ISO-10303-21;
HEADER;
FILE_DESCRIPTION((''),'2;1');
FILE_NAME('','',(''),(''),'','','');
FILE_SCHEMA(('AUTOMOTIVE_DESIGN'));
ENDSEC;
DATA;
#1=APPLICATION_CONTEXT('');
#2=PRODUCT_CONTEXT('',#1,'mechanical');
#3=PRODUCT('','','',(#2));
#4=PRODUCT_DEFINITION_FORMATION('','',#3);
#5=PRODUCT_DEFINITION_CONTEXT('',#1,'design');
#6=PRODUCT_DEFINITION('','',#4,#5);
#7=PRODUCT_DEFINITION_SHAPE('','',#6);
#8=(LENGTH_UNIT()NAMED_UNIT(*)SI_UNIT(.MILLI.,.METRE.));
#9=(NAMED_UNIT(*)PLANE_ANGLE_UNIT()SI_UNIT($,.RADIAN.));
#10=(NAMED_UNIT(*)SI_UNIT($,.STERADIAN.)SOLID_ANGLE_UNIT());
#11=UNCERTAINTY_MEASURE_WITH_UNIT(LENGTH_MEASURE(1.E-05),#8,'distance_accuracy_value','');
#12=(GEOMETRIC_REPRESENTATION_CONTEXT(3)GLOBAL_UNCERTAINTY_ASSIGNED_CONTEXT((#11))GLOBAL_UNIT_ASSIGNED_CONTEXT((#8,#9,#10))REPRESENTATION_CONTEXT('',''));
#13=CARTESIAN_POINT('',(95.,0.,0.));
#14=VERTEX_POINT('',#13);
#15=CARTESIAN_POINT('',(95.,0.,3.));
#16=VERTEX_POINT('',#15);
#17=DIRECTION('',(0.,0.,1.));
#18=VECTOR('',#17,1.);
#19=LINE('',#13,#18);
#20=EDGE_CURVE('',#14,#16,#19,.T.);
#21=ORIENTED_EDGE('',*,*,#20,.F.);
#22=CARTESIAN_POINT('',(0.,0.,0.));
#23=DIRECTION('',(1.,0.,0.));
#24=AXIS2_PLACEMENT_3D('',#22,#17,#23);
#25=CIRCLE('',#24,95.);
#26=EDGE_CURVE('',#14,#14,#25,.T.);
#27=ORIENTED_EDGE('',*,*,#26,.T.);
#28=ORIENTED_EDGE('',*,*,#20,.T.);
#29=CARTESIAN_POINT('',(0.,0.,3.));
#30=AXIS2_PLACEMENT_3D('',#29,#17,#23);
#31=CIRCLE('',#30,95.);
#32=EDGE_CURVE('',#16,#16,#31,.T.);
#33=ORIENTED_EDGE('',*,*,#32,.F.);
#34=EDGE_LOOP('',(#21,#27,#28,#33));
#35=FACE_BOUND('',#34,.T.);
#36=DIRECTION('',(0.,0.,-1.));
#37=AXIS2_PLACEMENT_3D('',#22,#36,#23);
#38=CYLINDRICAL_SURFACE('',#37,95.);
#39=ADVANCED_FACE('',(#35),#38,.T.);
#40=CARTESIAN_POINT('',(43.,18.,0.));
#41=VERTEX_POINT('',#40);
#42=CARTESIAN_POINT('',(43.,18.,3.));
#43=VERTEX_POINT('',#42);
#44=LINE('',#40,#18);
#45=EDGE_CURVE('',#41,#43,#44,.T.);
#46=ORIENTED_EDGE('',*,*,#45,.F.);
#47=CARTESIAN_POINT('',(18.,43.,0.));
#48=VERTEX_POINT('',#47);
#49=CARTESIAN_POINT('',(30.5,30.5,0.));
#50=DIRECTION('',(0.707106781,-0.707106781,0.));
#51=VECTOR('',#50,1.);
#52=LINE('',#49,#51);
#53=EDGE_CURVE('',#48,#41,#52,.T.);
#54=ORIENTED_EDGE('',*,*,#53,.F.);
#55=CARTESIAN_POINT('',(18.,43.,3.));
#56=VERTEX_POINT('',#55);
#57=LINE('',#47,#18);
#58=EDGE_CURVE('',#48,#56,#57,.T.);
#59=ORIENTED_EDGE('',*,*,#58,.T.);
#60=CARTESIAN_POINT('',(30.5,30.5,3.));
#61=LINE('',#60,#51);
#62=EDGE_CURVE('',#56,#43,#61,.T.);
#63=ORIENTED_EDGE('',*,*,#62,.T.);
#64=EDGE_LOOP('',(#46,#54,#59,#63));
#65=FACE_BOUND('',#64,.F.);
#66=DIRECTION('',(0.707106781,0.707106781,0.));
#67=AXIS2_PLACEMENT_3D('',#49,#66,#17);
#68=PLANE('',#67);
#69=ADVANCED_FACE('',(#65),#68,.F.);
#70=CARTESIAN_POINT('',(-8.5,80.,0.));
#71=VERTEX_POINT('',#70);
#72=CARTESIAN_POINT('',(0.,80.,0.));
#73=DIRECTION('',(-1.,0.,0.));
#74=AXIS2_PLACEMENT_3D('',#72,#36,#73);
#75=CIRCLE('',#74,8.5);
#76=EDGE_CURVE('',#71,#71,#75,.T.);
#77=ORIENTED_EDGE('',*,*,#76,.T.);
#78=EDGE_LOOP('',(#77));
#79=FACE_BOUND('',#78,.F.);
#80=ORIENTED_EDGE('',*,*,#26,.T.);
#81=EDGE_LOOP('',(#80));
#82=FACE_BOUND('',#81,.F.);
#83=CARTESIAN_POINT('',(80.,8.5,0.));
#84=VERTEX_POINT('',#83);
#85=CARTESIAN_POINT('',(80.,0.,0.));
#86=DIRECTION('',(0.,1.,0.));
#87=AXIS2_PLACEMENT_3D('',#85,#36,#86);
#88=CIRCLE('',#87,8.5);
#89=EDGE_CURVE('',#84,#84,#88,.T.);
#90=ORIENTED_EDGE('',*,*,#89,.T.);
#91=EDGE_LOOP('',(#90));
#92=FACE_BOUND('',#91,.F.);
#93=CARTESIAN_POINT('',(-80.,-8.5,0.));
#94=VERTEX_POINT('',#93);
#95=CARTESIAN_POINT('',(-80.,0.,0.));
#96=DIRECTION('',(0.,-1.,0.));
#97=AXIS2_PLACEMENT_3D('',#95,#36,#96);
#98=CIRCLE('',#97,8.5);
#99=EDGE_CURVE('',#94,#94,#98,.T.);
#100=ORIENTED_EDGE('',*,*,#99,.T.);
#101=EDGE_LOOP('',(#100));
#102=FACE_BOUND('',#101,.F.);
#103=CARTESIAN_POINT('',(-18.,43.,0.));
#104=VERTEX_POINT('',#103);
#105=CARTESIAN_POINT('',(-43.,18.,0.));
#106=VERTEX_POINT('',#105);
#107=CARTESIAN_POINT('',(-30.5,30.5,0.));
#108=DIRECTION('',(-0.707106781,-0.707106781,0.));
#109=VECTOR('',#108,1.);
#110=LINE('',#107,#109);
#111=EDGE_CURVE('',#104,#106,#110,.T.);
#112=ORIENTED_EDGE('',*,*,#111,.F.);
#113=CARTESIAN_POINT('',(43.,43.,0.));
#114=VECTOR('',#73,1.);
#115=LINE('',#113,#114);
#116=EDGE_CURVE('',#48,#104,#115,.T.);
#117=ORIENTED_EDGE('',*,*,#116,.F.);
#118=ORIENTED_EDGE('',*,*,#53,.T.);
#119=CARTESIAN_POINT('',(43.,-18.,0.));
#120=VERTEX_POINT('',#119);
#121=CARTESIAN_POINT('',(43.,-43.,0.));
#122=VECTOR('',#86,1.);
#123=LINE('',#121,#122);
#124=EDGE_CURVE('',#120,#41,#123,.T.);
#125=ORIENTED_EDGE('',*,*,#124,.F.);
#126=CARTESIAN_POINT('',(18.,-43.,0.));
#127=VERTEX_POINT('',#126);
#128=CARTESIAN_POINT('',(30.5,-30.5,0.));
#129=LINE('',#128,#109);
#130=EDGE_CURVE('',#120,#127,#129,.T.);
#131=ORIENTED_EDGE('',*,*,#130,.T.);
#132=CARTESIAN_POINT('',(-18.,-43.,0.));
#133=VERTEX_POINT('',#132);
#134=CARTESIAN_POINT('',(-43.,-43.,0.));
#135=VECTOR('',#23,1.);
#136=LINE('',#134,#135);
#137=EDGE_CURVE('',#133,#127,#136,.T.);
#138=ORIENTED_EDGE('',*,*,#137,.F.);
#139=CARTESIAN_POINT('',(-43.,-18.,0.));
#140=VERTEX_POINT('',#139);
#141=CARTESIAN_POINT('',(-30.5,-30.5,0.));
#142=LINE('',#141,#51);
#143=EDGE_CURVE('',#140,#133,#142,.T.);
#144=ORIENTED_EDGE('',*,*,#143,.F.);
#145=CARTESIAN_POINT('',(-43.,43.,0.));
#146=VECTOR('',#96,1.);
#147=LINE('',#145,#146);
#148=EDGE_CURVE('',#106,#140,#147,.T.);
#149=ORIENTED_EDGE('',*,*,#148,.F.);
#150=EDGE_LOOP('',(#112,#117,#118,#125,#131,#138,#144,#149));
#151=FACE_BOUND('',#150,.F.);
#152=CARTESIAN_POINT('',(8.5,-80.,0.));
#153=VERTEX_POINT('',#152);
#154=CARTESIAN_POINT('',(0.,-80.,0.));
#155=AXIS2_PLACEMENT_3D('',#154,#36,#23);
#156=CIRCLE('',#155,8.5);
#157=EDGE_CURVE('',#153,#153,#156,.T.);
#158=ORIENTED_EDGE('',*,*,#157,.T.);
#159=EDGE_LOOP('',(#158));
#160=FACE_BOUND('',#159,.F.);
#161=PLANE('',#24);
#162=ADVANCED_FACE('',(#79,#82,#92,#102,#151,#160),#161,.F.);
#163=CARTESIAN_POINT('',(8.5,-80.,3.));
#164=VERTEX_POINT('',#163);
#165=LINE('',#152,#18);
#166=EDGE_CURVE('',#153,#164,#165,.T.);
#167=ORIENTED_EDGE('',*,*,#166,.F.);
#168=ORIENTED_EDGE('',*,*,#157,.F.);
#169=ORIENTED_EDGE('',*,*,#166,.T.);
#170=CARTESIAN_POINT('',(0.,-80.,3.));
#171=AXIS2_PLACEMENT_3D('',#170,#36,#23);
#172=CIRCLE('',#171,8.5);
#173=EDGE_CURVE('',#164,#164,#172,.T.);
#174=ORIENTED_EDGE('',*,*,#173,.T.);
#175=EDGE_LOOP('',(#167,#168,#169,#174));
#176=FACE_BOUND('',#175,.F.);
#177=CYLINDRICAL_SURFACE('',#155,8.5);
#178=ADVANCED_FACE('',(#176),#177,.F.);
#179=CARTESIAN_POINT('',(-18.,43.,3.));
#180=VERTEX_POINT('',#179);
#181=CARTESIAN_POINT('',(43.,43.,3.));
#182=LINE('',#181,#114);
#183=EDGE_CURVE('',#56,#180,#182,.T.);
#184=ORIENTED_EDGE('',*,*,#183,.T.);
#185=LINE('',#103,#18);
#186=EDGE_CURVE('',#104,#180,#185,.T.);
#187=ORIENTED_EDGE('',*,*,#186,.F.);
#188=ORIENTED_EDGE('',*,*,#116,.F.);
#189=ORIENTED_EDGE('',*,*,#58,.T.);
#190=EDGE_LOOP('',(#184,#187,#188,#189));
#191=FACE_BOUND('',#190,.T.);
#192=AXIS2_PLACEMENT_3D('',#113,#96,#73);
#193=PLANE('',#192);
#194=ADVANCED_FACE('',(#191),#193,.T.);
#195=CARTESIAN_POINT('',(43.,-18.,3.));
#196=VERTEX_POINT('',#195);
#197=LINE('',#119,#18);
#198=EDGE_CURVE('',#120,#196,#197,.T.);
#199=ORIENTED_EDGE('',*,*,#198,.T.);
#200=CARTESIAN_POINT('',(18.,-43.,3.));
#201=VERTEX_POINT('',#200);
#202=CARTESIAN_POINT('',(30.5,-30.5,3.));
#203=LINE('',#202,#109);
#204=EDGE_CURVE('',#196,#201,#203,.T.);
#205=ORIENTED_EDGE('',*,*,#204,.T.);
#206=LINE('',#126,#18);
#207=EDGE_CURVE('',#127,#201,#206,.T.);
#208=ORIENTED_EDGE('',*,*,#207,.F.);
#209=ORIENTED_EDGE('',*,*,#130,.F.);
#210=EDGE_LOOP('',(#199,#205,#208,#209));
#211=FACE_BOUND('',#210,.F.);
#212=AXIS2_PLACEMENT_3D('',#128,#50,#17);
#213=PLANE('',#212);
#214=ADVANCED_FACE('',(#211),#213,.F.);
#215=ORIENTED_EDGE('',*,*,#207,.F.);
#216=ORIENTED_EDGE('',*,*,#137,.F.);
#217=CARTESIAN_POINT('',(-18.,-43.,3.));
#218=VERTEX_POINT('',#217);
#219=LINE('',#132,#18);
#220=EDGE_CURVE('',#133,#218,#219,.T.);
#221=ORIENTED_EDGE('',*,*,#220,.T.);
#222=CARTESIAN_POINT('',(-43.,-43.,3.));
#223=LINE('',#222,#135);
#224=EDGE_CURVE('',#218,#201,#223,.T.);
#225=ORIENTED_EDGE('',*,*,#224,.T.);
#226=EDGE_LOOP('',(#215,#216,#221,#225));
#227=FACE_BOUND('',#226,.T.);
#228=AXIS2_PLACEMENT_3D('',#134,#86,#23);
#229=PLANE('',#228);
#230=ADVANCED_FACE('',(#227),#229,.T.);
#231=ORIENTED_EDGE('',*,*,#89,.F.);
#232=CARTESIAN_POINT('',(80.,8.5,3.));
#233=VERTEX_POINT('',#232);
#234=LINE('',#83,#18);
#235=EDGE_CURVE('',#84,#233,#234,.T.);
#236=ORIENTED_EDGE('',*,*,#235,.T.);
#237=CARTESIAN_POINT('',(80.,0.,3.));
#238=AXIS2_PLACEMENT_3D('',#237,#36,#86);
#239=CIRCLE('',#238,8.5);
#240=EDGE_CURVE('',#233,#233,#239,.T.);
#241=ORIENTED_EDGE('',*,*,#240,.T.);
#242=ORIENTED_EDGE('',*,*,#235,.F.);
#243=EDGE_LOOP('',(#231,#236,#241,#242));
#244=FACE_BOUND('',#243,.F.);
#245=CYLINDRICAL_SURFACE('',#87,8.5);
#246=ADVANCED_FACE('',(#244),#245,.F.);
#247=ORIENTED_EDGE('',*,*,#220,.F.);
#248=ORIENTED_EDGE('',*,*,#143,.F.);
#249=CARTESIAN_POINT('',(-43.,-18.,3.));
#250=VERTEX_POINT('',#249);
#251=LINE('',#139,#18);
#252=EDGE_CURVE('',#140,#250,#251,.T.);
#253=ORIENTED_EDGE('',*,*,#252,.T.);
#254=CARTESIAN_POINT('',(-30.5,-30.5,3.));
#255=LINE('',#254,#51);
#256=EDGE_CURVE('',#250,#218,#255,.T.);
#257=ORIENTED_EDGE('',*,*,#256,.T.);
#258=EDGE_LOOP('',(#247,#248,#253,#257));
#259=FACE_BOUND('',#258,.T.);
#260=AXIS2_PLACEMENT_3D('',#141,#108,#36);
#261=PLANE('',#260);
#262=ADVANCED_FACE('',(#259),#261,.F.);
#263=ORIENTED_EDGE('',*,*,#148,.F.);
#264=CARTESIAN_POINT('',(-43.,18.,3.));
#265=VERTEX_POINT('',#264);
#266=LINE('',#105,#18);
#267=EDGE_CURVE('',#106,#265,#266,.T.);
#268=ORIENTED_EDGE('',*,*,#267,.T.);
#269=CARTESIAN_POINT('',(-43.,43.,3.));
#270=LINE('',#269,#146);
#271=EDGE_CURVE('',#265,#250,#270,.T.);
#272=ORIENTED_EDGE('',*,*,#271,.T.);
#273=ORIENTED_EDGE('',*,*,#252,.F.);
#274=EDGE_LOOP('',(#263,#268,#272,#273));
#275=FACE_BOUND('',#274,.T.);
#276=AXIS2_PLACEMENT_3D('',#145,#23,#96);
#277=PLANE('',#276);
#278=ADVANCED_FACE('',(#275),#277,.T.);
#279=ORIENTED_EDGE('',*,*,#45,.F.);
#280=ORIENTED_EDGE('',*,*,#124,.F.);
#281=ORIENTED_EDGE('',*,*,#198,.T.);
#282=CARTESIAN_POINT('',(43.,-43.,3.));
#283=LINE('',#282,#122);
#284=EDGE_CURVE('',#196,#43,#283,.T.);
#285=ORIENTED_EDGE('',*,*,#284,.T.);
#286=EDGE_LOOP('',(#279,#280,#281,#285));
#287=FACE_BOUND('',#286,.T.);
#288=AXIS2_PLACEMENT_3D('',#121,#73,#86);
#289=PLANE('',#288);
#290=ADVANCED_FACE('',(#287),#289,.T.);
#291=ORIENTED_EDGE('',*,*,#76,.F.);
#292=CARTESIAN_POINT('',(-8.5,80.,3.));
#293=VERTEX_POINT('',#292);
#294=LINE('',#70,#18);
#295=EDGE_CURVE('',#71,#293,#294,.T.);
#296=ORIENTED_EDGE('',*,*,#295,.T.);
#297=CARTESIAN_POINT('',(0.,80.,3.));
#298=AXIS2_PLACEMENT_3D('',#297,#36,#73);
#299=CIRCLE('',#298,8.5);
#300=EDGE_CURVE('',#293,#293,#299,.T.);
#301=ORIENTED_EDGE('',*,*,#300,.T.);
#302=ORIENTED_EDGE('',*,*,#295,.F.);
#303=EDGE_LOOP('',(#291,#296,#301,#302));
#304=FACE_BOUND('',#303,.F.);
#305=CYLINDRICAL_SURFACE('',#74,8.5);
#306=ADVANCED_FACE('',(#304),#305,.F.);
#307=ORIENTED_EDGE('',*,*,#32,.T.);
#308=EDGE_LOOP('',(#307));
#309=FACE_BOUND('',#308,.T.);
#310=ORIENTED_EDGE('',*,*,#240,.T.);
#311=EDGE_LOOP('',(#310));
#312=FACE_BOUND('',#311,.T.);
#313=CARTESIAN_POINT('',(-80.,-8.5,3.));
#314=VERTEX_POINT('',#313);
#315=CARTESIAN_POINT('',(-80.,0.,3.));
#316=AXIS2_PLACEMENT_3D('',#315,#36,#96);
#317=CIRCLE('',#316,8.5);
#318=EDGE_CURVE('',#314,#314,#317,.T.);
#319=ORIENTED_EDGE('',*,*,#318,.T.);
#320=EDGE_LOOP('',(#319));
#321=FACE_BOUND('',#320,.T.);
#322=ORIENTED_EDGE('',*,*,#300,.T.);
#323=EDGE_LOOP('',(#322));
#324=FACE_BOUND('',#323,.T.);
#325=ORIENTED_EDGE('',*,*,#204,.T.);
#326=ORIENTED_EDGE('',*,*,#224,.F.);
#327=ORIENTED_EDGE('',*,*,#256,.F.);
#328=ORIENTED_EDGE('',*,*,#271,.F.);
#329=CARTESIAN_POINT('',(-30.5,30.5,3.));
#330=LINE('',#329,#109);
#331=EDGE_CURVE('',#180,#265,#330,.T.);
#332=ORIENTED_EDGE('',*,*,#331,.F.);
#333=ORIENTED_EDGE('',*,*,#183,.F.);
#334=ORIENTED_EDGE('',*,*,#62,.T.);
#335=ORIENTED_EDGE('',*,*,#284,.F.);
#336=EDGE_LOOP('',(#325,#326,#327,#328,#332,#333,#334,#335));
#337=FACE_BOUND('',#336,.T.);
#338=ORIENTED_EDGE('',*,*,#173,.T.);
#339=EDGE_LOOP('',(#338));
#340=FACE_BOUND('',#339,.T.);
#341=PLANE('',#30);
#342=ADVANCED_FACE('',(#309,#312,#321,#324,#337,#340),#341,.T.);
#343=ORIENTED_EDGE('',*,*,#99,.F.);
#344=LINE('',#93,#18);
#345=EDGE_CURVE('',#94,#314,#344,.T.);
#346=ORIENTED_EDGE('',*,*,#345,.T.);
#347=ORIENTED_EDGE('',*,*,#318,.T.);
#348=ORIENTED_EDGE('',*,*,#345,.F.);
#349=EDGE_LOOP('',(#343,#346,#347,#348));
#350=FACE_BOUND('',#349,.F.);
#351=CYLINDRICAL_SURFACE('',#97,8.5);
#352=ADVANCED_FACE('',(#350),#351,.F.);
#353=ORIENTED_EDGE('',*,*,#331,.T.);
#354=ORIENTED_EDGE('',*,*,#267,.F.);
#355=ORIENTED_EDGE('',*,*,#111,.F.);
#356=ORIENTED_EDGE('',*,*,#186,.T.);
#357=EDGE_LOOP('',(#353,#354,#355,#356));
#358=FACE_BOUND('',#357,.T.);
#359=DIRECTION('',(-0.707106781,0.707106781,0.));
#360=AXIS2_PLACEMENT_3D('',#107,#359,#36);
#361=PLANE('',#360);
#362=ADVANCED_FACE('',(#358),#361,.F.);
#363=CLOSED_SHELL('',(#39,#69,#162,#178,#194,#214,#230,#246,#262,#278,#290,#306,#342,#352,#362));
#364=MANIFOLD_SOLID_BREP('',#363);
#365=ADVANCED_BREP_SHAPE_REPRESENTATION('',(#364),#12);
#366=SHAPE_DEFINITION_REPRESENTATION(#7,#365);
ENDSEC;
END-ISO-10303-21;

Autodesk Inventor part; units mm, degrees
ref_plane "YZ Plane" through (0, 0, 0) normal (1, 0, 0) x (0, 1, 0)
ref_plane "XZ Plane" through (0, 0, 0) normal (0, 1, 0) x (-1, 0, 0)
ref_plane "XY Plane" through (0, 0, 0) normal (0, 0, 1) x (1, 0, 0)
sketch "Sketch1" plane through (0, 0, 0) normal (0, 0, 1) x (1, 0, 0)
  circle A0 centre (0, 0) radius 95
  line L0 (43, 43) -> (-43, 43)
  line L1 (-43, 43) -> (-43, -43)
  line L2 (-43, -43) -> (43, -43)
  line L3 (43, -43) -> (43, 43)
  line L4 (43, 43) -> (-43, -43) construction
  line L5 (-43, 43) -> (43, -43) construction
  dimension "d157" = 190
  dimension "d158" = 86
  dimension "d159" = 86
extrude "Plate5" add sketch "Sketch1" along normal blind 3
sketch "Sketch7" plane through (0, 0, 0) normal (0, 0, -1) x (-1, 0, 0)
  circle A0 centre (0, 80) radius 8.5
  point P0 (0, 0)
  dimension "d160" = 17
  dimension "d161" = 80
extrude "Cut1" cut sketch "Sketch7" against normal blind 3
pattern_circular "Circular Pattern1" count 4 over 360 about axis through (0, 0, -10) along (0, 0, 1) of "Cut1"
chamfer "Corner Chamfer2" distance 25 angle 45 4 edges at (-43, -43, 1.5) (43, -43, 1.5) (-43, 43, 1.5) (43, 43, 1.5)
properties part number "PNS 1792  funnel FLANGE 1200 50-90" material "Stainless Steel"
